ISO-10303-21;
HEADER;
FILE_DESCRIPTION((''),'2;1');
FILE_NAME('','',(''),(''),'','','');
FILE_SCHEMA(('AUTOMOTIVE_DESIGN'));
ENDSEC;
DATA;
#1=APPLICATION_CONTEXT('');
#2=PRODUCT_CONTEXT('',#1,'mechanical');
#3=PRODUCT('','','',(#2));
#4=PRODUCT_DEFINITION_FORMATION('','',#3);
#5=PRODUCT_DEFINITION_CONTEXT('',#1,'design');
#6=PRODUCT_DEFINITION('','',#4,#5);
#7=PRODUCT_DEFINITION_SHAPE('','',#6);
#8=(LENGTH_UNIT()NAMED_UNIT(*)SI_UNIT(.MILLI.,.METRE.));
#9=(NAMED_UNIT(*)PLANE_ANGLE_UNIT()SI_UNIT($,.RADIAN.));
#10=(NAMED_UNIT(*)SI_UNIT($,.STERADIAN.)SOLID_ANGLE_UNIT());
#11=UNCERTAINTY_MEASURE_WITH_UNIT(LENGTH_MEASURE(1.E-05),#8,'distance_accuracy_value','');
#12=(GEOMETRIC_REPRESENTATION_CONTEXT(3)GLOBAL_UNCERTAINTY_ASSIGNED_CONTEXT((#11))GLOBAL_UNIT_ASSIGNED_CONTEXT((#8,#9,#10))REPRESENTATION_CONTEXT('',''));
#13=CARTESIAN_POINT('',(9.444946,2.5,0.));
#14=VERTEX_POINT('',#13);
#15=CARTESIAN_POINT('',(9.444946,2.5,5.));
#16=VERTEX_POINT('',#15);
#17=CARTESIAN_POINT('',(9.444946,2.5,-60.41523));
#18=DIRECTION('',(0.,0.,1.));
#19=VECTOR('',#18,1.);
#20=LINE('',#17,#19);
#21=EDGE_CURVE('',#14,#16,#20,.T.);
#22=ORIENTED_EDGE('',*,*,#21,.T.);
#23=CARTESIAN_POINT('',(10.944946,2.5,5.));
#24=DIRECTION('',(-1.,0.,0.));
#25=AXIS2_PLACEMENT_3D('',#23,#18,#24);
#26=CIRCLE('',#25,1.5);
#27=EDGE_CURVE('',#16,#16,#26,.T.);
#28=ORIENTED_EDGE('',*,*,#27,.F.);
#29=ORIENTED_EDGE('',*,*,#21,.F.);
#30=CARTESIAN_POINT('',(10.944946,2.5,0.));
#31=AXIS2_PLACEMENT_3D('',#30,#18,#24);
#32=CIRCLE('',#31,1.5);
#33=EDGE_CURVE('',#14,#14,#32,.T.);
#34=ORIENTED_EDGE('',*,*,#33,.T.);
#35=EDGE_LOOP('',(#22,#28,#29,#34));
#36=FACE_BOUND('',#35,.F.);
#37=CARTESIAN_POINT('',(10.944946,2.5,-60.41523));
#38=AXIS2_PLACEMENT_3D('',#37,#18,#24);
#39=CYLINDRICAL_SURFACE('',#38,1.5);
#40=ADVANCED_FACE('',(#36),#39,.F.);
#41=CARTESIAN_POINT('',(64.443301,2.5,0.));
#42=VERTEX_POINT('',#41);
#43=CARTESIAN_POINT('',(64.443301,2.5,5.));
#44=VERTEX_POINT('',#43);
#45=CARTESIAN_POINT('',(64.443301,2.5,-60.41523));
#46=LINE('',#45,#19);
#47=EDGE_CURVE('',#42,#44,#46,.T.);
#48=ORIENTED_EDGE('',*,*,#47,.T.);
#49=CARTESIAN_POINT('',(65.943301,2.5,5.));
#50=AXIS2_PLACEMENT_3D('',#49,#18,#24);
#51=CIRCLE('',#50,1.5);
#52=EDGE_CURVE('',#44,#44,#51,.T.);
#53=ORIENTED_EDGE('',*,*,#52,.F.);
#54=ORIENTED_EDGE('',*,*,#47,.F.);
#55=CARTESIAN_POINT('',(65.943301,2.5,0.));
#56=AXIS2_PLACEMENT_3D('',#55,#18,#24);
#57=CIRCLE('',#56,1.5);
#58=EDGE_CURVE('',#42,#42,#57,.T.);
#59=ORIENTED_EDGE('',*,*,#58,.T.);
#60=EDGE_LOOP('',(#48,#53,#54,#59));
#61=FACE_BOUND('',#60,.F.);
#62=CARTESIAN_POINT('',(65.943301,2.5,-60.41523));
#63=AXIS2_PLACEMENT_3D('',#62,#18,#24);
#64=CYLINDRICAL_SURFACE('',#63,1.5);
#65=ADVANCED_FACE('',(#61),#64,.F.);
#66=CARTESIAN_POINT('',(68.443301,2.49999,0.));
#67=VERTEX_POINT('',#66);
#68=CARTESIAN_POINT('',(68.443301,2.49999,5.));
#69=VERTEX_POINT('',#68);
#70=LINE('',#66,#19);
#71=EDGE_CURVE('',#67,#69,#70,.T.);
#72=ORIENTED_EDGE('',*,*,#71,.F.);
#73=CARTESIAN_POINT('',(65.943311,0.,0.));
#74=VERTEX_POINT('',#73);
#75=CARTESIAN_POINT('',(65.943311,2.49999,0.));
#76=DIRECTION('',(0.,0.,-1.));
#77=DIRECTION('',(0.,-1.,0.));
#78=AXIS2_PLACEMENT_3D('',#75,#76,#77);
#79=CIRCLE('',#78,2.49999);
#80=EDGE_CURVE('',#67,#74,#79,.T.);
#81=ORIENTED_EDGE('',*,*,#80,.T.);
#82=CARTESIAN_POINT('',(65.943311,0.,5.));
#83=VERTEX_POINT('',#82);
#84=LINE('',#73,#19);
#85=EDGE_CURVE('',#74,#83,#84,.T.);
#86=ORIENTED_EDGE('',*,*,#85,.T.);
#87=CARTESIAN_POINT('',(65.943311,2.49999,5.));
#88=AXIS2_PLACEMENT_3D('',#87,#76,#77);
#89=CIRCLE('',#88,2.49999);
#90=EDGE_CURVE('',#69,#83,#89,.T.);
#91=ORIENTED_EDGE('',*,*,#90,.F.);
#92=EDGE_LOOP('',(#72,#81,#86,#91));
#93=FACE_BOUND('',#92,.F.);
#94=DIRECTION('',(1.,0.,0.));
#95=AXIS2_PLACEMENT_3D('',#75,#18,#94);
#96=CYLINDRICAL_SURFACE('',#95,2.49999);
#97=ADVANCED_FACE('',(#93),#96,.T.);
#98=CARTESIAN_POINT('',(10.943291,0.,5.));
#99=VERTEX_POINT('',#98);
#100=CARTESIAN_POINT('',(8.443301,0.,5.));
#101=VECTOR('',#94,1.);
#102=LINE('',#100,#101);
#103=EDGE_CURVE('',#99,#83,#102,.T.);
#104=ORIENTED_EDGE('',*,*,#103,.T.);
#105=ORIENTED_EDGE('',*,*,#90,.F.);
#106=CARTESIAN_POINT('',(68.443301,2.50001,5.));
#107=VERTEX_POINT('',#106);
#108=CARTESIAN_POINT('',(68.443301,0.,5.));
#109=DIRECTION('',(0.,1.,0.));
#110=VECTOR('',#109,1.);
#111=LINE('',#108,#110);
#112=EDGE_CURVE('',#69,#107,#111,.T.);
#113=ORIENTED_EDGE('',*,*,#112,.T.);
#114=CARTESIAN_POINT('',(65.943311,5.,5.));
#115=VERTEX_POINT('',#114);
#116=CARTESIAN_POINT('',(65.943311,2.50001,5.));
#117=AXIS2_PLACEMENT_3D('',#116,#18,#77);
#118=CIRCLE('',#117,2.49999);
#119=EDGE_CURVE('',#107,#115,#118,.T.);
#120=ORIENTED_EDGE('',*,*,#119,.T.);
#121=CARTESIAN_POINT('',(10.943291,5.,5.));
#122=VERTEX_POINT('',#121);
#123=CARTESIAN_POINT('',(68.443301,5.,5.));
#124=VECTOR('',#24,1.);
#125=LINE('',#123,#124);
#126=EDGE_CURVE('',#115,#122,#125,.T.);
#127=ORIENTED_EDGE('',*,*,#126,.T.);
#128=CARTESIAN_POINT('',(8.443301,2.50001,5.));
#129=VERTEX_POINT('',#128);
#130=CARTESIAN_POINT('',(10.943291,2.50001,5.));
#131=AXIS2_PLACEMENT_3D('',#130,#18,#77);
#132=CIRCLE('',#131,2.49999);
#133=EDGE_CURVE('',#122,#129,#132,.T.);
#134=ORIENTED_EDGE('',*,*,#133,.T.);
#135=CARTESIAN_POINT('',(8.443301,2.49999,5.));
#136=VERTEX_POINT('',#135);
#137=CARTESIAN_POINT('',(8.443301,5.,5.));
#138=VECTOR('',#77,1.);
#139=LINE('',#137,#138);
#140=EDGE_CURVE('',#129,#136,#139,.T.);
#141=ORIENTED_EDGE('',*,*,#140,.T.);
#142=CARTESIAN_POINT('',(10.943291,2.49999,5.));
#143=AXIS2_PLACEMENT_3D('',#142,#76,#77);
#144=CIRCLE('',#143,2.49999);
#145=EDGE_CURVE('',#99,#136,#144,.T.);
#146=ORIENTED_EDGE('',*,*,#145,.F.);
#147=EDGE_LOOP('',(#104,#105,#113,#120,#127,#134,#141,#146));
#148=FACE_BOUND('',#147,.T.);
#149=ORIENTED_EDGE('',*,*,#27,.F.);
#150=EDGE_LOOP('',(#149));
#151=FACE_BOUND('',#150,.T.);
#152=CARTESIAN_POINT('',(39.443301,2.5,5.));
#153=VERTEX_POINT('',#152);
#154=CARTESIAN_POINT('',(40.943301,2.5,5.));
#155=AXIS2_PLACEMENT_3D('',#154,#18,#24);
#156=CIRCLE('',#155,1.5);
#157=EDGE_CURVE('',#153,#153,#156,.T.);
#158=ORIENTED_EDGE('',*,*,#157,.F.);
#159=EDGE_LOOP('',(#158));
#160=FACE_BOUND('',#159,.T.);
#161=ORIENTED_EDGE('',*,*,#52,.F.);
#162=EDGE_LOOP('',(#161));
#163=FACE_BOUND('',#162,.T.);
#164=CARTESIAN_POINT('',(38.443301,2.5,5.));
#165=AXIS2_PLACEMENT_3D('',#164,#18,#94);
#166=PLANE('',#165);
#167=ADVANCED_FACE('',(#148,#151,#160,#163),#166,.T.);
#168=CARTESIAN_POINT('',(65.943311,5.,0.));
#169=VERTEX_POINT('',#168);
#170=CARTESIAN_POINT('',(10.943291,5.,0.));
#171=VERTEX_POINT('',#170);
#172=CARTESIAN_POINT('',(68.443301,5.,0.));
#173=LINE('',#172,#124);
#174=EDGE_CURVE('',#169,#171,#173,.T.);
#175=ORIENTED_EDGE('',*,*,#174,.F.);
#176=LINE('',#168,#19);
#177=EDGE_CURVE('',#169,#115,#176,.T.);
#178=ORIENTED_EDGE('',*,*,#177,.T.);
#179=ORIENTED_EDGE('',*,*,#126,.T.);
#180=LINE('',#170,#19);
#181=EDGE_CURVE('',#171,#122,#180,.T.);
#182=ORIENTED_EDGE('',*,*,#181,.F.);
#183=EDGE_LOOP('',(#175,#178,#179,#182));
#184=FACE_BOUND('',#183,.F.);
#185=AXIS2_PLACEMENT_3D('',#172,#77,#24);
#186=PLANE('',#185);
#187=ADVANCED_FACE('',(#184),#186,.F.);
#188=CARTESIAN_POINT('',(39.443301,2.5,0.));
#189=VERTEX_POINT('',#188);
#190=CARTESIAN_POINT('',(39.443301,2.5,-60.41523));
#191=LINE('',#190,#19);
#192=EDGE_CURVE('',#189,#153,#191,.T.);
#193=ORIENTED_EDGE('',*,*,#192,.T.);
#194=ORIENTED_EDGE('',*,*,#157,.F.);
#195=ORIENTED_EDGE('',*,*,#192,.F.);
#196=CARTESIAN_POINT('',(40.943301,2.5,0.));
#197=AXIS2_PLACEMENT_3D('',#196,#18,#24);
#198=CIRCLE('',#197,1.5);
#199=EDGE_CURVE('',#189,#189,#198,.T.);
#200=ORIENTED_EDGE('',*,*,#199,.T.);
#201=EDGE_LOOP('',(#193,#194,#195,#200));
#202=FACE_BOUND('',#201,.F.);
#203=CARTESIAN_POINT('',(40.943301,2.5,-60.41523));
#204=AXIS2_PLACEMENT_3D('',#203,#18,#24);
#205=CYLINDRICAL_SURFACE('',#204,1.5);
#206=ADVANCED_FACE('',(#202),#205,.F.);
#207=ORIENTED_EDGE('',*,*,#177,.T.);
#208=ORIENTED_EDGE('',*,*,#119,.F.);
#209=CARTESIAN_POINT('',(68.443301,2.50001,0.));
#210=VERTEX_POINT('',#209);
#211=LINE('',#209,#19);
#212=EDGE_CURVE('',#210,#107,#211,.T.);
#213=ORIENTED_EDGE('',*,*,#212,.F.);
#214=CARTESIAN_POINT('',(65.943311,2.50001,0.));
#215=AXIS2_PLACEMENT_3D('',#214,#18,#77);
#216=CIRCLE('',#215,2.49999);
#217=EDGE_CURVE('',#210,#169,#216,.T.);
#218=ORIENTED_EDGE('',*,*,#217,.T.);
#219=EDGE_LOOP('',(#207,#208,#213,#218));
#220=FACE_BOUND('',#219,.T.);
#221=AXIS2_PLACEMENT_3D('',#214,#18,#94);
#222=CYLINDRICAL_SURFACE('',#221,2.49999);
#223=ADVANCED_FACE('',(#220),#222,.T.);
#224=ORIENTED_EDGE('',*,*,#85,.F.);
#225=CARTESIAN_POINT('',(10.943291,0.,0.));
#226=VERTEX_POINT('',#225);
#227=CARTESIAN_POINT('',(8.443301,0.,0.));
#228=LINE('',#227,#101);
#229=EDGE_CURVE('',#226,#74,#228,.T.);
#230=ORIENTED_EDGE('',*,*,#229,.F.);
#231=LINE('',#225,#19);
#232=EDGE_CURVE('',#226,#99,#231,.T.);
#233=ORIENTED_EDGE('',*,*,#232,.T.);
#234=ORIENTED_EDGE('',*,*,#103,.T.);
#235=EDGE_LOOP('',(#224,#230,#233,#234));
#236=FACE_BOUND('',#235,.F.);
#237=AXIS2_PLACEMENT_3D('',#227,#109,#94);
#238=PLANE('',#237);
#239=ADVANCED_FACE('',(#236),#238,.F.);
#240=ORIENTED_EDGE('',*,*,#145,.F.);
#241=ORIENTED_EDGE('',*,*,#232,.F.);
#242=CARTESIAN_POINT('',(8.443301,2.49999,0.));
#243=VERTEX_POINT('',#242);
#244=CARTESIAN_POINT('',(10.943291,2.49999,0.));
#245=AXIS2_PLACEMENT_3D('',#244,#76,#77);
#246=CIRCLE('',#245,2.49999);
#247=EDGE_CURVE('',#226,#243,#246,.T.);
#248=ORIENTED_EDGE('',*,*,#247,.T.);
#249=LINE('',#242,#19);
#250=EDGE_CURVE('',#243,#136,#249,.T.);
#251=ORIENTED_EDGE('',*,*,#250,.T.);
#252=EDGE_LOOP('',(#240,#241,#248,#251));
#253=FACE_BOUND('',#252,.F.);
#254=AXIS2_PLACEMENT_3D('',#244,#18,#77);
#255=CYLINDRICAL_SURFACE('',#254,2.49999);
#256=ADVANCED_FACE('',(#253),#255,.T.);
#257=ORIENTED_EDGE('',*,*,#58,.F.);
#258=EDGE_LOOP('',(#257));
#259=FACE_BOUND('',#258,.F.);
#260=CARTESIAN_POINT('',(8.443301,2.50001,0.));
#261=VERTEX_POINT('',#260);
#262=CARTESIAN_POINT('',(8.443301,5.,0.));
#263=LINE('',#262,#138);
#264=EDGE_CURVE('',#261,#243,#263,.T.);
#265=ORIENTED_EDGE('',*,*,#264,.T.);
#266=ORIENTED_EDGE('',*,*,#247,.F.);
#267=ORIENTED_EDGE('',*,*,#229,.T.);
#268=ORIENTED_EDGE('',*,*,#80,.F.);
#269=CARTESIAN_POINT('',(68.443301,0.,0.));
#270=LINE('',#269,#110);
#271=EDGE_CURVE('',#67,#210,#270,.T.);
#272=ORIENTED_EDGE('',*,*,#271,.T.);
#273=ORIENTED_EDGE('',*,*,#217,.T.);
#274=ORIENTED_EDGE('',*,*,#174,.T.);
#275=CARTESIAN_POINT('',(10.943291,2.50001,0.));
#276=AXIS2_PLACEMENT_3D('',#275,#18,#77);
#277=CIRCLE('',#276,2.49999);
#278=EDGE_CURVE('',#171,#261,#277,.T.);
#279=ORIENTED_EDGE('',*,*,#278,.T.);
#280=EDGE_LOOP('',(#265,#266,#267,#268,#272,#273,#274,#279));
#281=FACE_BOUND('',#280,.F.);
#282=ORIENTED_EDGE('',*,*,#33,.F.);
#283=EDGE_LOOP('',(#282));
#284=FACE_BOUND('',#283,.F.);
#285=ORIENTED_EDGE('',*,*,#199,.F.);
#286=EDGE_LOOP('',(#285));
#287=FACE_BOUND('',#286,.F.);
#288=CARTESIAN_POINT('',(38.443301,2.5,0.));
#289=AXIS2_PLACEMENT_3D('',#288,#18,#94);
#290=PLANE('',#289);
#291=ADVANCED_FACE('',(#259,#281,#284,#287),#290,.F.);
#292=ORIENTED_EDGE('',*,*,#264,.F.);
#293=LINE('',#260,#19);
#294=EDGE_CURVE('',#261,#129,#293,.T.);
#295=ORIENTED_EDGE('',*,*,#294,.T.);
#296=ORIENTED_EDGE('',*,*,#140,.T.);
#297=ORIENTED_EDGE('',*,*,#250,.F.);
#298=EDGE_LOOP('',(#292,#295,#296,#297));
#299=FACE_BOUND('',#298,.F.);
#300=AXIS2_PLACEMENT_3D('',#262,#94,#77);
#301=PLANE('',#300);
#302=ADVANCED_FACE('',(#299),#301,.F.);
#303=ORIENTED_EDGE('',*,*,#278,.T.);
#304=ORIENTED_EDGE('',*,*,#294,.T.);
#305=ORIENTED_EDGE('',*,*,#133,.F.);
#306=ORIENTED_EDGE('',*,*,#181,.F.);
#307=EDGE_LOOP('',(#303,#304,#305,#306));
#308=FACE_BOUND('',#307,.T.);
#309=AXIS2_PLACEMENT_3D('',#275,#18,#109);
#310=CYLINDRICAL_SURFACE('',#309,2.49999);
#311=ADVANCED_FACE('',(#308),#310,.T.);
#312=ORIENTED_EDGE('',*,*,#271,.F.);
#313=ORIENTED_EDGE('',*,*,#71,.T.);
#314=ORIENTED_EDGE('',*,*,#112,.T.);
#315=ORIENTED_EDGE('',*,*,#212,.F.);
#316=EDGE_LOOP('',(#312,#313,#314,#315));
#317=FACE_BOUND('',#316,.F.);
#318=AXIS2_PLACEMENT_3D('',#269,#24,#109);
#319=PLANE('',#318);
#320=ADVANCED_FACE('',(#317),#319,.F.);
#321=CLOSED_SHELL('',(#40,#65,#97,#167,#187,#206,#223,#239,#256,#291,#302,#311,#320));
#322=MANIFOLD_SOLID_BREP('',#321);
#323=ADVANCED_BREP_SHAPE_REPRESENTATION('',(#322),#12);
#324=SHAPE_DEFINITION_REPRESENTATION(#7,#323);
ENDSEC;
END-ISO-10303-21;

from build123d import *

# Parameters (mm, degrees)
F1_DEPTH = 5
F2_D     = 3
F3_R     = 2.49999


# Not quite as in the source:
# - a fillet or chamfer is up to 0.001 mm smaller than in the source, because OpenCascade refuses the exact size


with BuildPart() as f1:
    # F0 (on Top) → F1 (new body)
    with BuildSketch(Plane.XY):
        Polygon((43.4433006123, 0), (68.4433006123, 0), (68.4433006123, 5), (8.4433006123, 5), (8.4433006123, 0), (40.9433006123, 0), align=None)
    extrude(amount=F1_DEPTH)

    # F2 (through all)
    with Locations(Plane(origin=(0, 0, 0), x_dir=(1, 0, 0), z_dir=(0, 0, -1))):
        with Locations((40.9433006123, -2.5), (65.9433006123, -2.5), (10.9449457377, -2.5)):
            Hole(F2_D / 2)

    # F3 (radius 2.5 in the source; OpenCascade refuses exactly that, so slightly less here)
    f3_edges = [f1.edges().sort_by_distance(p)[0] for p in [
        (8.443301, 0, 2.5),
        (8.443301, 5, 2.5),
        (68.443301, 0, 2.5),
        (68.443301, 5, 2.5),
    ]]
    fillet(f3_edges, radius=F3_R)


solid = f1.part
